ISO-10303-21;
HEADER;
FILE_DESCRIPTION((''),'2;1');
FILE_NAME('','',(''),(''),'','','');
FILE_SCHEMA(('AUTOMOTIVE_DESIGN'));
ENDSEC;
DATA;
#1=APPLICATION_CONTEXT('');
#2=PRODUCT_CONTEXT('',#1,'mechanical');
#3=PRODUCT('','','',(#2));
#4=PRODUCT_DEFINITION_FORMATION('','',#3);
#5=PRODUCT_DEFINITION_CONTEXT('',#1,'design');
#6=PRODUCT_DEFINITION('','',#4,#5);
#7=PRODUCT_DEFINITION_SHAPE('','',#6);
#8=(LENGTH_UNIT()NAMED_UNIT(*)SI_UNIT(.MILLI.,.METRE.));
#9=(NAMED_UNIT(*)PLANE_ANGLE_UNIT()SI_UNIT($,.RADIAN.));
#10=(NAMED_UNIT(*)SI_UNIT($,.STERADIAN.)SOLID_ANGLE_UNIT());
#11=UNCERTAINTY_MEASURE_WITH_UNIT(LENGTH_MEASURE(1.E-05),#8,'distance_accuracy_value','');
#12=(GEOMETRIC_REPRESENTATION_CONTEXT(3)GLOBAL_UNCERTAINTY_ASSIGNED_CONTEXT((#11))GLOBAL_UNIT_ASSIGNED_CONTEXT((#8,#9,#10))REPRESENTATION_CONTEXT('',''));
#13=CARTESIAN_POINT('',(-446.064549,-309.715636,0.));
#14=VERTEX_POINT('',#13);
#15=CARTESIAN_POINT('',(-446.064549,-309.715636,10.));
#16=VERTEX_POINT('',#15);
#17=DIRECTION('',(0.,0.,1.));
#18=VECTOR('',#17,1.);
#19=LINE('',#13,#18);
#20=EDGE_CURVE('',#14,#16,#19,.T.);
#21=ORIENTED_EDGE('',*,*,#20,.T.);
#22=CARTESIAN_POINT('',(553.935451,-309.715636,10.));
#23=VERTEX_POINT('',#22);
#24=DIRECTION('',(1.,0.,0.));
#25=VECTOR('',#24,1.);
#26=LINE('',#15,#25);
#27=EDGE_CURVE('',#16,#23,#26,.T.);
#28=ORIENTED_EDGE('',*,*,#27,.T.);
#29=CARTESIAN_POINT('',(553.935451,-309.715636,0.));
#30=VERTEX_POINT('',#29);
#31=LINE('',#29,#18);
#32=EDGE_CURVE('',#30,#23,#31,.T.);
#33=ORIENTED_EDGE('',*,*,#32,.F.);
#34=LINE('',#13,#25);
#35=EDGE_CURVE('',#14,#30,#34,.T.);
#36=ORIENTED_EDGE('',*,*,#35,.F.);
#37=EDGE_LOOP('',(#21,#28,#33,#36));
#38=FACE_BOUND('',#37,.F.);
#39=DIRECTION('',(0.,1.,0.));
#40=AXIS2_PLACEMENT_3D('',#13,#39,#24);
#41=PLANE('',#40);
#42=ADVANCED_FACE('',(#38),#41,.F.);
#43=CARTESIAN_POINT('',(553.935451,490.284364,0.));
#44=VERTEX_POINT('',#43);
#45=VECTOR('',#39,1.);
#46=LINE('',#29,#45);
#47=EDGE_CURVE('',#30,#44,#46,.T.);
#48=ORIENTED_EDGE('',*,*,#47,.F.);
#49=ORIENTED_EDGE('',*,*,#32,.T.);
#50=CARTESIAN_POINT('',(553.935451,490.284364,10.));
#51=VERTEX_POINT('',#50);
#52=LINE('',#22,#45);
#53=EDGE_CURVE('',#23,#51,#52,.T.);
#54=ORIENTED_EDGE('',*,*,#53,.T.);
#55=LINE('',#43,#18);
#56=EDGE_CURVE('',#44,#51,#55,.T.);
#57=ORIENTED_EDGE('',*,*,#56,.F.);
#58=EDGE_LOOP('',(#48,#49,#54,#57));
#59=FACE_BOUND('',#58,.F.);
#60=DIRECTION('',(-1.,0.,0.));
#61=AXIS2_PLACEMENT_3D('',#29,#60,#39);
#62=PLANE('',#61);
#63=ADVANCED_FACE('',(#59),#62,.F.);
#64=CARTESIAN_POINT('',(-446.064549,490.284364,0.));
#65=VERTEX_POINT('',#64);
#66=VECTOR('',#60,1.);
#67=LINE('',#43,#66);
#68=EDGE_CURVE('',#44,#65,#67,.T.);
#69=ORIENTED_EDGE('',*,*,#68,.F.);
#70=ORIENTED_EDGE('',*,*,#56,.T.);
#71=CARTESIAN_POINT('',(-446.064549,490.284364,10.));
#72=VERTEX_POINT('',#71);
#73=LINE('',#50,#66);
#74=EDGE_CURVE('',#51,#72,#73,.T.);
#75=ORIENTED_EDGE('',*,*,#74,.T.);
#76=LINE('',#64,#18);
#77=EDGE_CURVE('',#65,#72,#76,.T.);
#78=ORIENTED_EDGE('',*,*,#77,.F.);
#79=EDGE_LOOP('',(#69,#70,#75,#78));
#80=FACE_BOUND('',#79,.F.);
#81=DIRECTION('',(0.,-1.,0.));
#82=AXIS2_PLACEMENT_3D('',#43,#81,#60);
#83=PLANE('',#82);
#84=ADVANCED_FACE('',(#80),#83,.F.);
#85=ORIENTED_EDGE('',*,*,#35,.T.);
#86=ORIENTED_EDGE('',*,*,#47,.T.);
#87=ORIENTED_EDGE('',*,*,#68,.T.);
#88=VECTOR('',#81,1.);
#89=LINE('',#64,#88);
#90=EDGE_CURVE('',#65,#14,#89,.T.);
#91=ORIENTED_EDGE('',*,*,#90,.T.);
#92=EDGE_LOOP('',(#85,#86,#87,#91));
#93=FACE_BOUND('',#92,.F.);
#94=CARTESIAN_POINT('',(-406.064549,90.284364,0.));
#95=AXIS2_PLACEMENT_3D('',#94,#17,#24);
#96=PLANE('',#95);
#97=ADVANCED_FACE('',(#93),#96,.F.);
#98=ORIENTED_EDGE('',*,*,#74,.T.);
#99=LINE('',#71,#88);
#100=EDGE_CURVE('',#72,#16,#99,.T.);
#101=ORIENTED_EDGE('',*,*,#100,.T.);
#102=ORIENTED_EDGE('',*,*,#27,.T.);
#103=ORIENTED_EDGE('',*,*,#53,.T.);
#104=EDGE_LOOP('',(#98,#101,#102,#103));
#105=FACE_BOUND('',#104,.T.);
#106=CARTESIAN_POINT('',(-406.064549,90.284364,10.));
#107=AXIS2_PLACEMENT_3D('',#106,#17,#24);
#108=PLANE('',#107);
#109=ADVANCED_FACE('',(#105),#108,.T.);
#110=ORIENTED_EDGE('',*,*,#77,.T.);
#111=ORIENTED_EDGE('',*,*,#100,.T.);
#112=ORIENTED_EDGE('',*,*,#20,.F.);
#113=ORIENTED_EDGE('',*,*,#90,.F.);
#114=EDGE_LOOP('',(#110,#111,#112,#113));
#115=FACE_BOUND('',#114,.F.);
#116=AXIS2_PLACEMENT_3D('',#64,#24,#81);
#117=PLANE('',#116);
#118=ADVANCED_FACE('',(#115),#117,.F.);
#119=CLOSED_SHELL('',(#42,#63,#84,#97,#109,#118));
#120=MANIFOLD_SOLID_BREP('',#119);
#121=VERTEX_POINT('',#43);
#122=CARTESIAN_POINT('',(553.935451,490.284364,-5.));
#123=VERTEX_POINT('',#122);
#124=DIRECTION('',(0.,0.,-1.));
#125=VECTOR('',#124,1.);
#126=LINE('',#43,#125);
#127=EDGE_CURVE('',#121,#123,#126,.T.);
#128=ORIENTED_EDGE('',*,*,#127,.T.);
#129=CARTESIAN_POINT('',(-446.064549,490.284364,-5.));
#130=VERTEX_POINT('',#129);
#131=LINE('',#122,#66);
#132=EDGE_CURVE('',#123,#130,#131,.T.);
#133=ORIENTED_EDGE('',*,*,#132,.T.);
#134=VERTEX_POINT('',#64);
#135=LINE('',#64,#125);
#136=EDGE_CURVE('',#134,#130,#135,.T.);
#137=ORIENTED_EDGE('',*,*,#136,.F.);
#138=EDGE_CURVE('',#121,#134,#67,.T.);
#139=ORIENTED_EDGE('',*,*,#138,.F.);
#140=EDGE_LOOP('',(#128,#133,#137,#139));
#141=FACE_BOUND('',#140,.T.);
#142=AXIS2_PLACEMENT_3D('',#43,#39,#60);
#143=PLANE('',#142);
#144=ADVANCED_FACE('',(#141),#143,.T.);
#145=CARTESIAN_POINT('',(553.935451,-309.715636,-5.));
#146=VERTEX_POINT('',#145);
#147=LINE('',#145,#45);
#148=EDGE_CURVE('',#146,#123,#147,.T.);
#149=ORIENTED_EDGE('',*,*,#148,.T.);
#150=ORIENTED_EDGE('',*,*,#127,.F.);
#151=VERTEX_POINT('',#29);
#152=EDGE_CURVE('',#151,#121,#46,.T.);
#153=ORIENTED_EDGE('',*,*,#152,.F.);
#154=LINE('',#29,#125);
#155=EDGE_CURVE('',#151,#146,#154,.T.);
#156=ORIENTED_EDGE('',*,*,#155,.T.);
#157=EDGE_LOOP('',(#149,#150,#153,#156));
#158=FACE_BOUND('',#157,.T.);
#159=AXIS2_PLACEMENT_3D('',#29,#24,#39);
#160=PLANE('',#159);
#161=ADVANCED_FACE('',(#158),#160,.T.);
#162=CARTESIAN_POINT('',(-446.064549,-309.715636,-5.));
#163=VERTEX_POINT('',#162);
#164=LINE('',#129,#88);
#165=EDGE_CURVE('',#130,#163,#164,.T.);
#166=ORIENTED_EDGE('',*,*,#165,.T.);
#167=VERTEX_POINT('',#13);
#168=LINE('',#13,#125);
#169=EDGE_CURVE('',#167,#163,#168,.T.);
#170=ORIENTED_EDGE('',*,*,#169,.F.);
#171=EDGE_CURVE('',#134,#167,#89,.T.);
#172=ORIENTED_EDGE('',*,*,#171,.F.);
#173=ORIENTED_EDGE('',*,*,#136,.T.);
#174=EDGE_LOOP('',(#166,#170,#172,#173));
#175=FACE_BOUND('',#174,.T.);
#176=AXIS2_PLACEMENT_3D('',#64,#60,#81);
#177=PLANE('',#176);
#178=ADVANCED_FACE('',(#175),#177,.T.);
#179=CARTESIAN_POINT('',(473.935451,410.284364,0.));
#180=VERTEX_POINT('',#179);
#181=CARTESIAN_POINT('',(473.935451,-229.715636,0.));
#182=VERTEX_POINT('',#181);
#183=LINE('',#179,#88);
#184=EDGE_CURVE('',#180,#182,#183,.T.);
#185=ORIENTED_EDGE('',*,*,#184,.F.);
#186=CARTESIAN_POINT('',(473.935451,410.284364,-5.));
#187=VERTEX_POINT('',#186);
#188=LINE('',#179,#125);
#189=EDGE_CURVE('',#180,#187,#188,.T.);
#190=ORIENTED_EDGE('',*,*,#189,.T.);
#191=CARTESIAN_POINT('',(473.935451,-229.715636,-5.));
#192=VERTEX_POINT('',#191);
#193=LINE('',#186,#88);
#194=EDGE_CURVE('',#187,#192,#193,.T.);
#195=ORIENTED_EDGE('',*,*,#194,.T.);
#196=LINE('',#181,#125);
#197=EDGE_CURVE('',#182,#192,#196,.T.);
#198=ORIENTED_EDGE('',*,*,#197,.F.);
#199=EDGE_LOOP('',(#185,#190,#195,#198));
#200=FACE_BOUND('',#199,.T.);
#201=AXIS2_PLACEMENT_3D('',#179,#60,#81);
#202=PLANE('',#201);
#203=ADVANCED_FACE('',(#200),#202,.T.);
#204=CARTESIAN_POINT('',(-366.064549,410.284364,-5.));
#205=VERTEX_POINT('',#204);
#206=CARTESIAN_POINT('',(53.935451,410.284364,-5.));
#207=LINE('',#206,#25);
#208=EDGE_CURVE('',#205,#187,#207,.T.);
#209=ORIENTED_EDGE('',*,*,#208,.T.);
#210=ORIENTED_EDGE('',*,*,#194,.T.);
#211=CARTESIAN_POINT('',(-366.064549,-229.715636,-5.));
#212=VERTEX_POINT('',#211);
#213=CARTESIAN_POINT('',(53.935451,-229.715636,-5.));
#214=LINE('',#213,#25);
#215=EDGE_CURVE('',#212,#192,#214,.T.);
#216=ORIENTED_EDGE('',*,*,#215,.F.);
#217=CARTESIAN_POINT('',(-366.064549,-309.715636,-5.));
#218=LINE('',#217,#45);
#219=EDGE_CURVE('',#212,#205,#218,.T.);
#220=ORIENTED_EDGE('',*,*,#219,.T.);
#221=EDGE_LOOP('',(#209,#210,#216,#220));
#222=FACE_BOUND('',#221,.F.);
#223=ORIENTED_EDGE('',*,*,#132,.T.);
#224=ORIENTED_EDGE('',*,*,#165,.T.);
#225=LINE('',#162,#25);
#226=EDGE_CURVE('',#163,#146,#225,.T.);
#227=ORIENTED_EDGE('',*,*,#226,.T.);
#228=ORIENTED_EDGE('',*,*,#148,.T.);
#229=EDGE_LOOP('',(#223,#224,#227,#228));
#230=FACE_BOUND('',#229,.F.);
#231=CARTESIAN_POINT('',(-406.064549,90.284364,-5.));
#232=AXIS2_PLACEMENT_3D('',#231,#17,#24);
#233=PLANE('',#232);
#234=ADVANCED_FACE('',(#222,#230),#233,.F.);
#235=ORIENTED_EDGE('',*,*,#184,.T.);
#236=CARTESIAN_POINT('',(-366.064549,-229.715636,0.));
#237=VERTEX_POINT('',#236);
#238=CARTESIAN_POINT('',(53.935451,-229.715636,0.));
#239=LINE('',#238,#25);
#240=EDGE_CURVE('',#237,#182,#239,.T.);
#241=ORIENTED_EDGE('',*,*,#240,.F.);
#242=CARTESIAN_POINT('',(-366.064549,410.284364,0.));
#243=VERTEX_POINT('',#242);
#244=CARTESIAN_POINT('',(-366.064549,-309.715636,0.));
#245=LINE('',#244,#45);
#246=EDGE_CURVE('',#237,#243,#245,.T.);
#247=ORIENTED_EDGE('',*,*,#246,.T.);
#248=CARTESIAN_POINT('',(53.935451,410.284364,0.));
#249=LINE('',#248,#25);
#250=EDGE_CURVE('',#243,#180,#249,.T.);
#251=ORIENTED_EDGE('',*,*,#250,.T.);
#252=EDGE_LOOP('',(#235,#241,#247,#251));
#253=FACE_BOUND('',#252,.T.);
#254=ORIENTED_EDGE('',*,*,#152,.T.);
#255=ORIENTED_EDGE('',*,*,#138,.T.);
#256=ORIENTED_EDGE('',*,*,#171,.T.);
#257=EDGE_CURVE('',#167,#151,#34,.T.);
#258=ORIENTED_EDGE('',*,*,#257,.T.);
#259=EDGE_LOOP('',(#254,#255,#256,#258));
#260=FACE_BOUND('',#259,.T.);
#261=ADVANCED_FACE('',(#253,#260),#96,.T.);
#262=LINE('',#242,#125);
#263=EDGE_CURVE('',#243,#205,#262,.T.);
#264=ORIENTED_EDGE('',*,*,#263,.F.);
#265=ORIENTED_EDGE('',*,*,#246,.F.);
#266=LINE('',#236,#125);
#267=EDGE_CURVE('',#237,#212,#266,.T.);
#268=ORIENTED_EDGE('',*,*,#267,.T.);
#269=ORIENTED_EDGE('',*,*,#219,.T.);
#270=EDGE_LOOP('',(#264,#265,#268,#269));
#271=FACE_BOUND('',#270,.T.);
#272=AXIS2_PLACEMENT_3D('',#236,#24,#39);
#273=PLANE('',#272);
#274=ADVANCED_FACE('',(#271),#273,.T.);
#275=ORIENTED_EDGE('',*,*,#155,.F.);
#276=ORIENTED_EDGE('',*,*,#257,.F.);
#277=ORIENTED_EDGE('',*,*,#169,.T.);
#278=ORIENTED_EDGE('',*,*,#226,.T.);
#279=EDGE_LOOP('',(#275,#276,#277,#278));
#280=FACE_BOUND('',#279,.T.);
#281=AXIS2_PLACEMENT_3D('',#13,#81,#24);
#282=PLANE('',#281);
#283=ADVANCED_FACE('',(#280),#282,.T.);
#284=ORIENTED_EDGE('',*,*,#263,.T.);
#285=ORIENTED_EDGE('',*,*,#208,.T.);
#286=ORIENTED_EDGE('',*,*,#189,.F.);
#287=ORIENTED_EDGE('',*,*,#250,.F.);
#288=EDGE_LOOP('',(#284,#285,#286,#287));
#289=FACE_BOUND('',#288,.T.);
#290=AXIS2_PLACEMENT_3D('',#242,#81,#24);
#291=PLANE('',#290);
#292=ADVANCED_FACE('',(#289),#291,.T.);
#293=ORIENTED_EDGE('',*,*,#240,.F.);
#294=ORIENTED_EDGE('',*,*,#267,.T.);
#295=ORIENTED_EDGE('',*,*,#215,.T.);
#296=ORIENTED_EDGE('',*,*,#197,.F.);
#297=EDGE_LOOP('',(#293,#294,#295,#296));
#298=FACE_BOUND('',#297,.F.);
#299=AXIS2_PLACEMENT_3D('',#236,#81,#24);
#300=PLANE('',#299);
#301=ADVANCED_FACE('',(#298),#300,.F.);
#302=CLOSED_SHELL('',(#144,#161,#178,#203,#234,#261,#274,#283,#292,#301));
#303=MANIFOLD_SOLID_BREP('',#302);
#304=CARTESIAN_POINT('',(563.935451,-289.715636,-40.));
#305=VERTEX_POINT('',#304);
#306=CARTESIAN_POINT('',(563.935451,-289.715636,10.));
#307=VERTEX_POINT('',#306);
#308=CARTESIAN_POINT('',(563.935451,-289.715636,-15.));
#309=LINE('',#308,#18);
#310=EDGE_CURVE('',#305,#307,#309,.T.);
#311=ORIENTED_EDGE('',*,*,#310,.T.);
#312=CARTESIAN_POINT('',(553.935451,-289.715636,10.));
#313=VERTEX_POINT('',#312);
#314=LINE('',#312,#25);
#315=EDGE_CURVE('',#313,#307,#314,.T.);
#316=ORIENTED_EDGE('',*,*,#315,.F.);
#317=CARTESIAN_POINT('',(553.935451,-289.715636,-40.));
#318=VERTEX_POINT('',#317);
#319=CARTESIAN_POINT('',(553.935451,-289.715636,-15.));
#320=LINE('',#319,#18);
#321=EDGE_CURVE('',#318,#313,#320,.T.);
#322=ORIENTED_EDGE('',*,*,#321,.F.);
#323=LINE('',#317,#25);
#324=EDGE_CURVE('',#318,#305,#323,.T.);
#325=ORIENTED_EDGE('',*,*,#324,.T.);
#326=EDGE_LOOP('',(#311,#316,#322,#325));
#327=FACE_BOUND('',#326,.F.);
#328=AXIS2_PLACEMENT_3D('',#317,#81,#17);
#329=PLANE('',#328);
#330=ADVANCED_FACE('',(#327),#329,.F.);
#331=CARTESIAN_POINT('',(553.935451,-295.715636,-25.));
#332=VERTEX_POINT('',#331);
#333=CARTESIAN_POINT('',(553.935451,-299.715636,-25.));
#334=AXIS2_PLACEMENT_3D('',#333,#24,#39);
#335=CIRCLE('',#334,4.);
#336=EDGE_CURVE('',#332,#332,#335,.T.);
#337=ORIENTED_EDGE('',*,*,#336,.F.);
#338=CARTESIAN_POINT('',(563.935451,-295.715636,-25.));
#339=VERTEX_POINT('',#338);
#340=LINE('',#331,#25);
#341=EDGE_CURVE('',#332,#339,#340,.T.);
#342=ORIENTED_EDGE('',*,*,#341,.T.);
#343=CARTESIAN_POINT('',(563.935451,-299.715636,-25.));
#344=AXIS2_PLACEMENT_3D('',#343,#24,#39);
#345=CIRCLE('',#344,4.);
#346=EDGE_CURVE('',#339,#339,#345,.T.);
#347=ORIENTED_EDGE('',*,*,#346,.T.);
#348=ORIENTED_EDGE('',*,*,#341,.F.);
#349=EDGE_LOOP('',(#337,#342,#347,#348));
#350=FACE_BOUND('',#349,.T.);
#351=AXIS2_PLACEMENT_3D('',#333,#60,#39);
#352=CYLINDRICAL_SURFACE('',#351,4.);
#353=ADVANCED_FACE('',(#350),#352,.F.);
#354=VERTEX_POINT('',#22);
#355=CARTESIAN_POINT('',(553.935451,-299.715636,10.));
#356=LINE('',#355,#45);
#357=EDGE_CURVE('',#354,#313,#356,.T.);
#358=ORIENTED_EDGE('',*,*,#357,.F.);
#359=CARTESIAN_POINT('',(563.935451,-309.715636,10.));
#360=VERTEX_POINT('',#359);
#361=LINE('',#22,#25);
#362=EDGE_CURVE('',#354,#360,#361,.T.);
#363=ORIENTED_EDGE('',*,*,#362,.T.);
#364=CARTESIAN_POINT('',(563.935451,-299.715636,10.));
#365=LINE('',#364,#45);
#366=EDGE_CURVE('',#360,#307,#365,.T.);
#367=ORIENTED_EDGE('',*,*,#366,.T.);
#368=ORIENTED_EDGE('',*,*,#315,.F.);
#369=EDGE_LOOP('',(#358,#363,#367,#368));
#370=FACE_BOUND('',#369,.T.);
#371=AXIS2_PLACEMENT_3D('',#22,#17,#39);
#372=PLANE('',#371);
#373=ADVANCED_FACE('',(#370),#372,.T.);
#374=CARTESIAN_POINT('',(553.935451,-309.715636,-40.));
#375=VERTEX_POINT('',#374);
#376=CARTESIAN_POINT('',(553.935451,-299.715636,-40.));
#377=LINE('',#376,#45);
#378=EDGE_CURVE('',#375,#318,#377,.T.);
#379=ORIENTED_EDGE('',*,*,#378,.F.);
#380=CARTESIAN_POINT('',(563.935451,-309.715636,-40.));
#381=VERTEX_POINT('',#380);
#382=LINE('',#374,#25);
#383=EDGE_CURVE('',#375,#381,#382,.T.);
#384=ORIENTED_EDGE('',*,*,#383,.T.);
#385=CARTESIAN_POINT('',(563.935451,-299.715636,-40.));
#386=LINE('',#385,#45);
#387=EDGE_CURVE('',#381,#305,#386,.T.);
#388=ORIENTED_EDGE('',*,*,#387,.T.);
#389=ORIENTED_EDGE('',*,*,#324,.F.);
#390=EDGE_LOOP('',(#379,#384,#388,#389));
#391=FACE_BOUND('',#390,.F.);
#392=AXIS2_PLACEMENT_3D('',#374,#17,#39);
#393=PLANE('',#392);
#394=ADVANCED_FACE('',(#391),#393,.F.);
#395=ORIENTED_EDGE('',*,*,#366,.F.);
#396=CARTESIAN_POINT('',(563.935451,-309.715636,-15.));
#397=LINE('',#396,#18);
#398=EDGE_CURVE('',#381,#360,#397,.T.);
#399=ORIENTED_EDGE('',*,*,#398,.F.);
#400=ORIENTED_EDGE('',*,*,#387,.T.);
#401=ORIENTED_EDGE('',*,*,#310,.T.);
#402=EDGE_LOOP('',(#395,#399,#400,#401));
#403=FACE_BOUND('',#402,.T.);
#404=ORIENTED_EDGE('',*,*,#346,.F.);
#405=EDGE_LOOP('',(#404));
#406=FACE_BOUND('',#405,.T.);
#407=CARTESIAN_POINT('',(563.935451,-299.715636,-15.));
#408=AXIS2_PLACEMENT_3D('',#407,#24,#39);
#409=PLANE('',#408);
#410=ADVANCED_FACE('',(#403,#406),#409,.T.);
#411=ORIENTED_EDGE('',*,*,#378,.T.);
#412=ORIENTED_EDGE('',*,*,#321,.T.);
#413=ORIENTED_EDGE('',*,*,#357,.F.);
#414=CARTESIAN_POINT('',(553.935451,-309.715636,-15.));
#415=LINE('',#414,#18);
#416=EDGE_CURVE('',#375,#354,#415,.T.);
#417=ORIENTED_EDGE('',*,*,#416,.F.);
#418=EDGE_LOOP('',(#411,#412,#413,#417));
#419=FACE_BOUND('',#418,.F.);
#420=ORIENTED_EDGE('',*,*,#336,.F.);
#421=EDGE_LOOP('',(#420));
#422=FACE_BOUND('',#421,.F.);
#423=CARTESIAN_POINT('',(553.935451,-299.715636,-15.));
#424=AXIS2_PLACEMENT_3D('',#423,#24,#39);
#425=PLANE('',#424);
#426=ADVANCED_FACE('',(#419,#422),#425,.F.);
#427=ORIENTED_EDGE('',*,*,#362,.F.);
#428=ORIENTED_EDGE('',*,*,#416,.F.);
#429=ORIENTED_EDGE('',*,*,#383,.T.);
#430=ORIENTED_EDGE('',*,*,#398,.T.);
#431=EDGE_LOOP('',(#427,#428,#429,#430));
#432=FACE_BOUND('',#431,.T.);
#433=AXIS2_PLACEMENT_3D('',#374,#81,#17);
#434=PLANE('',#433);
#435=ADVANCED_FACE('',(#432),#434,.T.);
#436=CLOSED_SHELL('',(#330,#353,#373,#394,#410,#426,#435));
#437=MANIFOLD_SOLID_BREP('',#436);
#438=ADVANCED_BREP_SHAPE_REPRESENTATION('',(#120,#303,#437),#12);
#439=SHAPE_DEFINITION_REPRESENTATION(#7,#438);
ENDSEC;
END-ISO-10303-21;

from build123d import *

# Parameters (mm, degrees)
F0_W     = 840
F0_H     = 80
F0_H_2   = 640
F1_DEPTH = 10
F2_DEPTH = 5
F3_W     = 20
F3_H     = 50
F3_R     = 4
F4_DEPTH = 10


# Not quite as in the source:
# - a feature names something its author has since deleted; it is built from what else it names


with BuildPart() as f1:
    # F0 (on Top) → F1 (new body)
    with BuildSketch(Plane.XY):
        Polygon((-446.064549312, 490.2843640471), (-446.064549312, -309.7156359529), (-366.064549312, -309.7156359529), (-366.064549312, -229.7156359529), (-366.064549312, 410.2843640471), (-366.064549312, 490.2843640471), align=None)
        with Locations((53.935450688, -269.7156359529)):
            Rectangle(F0_W, F0_H)
        Polygon((473.935450688, -229.7156359529), (473.935450688, -309.7156359529), (553.935450688, -309.7156359529), (553.935450688, 490.2843640471), (473.935450688, 490.2843640471), (473.935450688, 410.2843640471), align=None)
        with Locations((53.935450688, 90.2843640471)):
            Rectangle(F0_W, F0_H_2)
        with Locations((53.935450688, 450.2843640471)):
            Rectangle(F0_W, F0_H)
    extrude(amount=F1_DEPTH)


with BuildPart() as f2:
    # F0 (on Top) → F2 (new body)
    with BuildSketch(Plane.XY):
        Polygon((-446.064549312, 490.2843640471), (-446.064549312, -309.7156359529), (-366.064549312, -309.7156359529), (-366.064549312, -229.7156359529), (-366.064549312, 410.2843640471), (-366.064549312, 490.2843640471), align=None)
        with Locations((53.935450688, 450.2843640471)):
            Rectangle(F0_W, F0_H)
        with Locations((53.935450688, -269.7156359529)):
            Rectangle(F0_W, F0_H)
        Polygon((473.935450688, -229.7156359529), (473.935450688, -309.7156359529), (553.935450688, -309.7156359529), (553.935450688, 490.2843640471), (473.935450688, 490.2843640471), (473.935450688, 410.2843640471), align=None)
    extrude(amount=-F2_DEPTH)


with BuildPart() as f4:
    # F3 (on face) → F4 (new body)
    with BuildSketch(Plane.YZ.offset(553.935450688)):
        with Locations((-299.7156359529, -15)):
            Rectangle(F3_W, F3_H)
        with Locations((-299.7156359529, -25)):
            Circle(F3_R, mode=Mode.SUBTRACT)
    extrude(amount=F4_DEPTH)


solid = Compound([f1.part, f2.part, f4.part])
